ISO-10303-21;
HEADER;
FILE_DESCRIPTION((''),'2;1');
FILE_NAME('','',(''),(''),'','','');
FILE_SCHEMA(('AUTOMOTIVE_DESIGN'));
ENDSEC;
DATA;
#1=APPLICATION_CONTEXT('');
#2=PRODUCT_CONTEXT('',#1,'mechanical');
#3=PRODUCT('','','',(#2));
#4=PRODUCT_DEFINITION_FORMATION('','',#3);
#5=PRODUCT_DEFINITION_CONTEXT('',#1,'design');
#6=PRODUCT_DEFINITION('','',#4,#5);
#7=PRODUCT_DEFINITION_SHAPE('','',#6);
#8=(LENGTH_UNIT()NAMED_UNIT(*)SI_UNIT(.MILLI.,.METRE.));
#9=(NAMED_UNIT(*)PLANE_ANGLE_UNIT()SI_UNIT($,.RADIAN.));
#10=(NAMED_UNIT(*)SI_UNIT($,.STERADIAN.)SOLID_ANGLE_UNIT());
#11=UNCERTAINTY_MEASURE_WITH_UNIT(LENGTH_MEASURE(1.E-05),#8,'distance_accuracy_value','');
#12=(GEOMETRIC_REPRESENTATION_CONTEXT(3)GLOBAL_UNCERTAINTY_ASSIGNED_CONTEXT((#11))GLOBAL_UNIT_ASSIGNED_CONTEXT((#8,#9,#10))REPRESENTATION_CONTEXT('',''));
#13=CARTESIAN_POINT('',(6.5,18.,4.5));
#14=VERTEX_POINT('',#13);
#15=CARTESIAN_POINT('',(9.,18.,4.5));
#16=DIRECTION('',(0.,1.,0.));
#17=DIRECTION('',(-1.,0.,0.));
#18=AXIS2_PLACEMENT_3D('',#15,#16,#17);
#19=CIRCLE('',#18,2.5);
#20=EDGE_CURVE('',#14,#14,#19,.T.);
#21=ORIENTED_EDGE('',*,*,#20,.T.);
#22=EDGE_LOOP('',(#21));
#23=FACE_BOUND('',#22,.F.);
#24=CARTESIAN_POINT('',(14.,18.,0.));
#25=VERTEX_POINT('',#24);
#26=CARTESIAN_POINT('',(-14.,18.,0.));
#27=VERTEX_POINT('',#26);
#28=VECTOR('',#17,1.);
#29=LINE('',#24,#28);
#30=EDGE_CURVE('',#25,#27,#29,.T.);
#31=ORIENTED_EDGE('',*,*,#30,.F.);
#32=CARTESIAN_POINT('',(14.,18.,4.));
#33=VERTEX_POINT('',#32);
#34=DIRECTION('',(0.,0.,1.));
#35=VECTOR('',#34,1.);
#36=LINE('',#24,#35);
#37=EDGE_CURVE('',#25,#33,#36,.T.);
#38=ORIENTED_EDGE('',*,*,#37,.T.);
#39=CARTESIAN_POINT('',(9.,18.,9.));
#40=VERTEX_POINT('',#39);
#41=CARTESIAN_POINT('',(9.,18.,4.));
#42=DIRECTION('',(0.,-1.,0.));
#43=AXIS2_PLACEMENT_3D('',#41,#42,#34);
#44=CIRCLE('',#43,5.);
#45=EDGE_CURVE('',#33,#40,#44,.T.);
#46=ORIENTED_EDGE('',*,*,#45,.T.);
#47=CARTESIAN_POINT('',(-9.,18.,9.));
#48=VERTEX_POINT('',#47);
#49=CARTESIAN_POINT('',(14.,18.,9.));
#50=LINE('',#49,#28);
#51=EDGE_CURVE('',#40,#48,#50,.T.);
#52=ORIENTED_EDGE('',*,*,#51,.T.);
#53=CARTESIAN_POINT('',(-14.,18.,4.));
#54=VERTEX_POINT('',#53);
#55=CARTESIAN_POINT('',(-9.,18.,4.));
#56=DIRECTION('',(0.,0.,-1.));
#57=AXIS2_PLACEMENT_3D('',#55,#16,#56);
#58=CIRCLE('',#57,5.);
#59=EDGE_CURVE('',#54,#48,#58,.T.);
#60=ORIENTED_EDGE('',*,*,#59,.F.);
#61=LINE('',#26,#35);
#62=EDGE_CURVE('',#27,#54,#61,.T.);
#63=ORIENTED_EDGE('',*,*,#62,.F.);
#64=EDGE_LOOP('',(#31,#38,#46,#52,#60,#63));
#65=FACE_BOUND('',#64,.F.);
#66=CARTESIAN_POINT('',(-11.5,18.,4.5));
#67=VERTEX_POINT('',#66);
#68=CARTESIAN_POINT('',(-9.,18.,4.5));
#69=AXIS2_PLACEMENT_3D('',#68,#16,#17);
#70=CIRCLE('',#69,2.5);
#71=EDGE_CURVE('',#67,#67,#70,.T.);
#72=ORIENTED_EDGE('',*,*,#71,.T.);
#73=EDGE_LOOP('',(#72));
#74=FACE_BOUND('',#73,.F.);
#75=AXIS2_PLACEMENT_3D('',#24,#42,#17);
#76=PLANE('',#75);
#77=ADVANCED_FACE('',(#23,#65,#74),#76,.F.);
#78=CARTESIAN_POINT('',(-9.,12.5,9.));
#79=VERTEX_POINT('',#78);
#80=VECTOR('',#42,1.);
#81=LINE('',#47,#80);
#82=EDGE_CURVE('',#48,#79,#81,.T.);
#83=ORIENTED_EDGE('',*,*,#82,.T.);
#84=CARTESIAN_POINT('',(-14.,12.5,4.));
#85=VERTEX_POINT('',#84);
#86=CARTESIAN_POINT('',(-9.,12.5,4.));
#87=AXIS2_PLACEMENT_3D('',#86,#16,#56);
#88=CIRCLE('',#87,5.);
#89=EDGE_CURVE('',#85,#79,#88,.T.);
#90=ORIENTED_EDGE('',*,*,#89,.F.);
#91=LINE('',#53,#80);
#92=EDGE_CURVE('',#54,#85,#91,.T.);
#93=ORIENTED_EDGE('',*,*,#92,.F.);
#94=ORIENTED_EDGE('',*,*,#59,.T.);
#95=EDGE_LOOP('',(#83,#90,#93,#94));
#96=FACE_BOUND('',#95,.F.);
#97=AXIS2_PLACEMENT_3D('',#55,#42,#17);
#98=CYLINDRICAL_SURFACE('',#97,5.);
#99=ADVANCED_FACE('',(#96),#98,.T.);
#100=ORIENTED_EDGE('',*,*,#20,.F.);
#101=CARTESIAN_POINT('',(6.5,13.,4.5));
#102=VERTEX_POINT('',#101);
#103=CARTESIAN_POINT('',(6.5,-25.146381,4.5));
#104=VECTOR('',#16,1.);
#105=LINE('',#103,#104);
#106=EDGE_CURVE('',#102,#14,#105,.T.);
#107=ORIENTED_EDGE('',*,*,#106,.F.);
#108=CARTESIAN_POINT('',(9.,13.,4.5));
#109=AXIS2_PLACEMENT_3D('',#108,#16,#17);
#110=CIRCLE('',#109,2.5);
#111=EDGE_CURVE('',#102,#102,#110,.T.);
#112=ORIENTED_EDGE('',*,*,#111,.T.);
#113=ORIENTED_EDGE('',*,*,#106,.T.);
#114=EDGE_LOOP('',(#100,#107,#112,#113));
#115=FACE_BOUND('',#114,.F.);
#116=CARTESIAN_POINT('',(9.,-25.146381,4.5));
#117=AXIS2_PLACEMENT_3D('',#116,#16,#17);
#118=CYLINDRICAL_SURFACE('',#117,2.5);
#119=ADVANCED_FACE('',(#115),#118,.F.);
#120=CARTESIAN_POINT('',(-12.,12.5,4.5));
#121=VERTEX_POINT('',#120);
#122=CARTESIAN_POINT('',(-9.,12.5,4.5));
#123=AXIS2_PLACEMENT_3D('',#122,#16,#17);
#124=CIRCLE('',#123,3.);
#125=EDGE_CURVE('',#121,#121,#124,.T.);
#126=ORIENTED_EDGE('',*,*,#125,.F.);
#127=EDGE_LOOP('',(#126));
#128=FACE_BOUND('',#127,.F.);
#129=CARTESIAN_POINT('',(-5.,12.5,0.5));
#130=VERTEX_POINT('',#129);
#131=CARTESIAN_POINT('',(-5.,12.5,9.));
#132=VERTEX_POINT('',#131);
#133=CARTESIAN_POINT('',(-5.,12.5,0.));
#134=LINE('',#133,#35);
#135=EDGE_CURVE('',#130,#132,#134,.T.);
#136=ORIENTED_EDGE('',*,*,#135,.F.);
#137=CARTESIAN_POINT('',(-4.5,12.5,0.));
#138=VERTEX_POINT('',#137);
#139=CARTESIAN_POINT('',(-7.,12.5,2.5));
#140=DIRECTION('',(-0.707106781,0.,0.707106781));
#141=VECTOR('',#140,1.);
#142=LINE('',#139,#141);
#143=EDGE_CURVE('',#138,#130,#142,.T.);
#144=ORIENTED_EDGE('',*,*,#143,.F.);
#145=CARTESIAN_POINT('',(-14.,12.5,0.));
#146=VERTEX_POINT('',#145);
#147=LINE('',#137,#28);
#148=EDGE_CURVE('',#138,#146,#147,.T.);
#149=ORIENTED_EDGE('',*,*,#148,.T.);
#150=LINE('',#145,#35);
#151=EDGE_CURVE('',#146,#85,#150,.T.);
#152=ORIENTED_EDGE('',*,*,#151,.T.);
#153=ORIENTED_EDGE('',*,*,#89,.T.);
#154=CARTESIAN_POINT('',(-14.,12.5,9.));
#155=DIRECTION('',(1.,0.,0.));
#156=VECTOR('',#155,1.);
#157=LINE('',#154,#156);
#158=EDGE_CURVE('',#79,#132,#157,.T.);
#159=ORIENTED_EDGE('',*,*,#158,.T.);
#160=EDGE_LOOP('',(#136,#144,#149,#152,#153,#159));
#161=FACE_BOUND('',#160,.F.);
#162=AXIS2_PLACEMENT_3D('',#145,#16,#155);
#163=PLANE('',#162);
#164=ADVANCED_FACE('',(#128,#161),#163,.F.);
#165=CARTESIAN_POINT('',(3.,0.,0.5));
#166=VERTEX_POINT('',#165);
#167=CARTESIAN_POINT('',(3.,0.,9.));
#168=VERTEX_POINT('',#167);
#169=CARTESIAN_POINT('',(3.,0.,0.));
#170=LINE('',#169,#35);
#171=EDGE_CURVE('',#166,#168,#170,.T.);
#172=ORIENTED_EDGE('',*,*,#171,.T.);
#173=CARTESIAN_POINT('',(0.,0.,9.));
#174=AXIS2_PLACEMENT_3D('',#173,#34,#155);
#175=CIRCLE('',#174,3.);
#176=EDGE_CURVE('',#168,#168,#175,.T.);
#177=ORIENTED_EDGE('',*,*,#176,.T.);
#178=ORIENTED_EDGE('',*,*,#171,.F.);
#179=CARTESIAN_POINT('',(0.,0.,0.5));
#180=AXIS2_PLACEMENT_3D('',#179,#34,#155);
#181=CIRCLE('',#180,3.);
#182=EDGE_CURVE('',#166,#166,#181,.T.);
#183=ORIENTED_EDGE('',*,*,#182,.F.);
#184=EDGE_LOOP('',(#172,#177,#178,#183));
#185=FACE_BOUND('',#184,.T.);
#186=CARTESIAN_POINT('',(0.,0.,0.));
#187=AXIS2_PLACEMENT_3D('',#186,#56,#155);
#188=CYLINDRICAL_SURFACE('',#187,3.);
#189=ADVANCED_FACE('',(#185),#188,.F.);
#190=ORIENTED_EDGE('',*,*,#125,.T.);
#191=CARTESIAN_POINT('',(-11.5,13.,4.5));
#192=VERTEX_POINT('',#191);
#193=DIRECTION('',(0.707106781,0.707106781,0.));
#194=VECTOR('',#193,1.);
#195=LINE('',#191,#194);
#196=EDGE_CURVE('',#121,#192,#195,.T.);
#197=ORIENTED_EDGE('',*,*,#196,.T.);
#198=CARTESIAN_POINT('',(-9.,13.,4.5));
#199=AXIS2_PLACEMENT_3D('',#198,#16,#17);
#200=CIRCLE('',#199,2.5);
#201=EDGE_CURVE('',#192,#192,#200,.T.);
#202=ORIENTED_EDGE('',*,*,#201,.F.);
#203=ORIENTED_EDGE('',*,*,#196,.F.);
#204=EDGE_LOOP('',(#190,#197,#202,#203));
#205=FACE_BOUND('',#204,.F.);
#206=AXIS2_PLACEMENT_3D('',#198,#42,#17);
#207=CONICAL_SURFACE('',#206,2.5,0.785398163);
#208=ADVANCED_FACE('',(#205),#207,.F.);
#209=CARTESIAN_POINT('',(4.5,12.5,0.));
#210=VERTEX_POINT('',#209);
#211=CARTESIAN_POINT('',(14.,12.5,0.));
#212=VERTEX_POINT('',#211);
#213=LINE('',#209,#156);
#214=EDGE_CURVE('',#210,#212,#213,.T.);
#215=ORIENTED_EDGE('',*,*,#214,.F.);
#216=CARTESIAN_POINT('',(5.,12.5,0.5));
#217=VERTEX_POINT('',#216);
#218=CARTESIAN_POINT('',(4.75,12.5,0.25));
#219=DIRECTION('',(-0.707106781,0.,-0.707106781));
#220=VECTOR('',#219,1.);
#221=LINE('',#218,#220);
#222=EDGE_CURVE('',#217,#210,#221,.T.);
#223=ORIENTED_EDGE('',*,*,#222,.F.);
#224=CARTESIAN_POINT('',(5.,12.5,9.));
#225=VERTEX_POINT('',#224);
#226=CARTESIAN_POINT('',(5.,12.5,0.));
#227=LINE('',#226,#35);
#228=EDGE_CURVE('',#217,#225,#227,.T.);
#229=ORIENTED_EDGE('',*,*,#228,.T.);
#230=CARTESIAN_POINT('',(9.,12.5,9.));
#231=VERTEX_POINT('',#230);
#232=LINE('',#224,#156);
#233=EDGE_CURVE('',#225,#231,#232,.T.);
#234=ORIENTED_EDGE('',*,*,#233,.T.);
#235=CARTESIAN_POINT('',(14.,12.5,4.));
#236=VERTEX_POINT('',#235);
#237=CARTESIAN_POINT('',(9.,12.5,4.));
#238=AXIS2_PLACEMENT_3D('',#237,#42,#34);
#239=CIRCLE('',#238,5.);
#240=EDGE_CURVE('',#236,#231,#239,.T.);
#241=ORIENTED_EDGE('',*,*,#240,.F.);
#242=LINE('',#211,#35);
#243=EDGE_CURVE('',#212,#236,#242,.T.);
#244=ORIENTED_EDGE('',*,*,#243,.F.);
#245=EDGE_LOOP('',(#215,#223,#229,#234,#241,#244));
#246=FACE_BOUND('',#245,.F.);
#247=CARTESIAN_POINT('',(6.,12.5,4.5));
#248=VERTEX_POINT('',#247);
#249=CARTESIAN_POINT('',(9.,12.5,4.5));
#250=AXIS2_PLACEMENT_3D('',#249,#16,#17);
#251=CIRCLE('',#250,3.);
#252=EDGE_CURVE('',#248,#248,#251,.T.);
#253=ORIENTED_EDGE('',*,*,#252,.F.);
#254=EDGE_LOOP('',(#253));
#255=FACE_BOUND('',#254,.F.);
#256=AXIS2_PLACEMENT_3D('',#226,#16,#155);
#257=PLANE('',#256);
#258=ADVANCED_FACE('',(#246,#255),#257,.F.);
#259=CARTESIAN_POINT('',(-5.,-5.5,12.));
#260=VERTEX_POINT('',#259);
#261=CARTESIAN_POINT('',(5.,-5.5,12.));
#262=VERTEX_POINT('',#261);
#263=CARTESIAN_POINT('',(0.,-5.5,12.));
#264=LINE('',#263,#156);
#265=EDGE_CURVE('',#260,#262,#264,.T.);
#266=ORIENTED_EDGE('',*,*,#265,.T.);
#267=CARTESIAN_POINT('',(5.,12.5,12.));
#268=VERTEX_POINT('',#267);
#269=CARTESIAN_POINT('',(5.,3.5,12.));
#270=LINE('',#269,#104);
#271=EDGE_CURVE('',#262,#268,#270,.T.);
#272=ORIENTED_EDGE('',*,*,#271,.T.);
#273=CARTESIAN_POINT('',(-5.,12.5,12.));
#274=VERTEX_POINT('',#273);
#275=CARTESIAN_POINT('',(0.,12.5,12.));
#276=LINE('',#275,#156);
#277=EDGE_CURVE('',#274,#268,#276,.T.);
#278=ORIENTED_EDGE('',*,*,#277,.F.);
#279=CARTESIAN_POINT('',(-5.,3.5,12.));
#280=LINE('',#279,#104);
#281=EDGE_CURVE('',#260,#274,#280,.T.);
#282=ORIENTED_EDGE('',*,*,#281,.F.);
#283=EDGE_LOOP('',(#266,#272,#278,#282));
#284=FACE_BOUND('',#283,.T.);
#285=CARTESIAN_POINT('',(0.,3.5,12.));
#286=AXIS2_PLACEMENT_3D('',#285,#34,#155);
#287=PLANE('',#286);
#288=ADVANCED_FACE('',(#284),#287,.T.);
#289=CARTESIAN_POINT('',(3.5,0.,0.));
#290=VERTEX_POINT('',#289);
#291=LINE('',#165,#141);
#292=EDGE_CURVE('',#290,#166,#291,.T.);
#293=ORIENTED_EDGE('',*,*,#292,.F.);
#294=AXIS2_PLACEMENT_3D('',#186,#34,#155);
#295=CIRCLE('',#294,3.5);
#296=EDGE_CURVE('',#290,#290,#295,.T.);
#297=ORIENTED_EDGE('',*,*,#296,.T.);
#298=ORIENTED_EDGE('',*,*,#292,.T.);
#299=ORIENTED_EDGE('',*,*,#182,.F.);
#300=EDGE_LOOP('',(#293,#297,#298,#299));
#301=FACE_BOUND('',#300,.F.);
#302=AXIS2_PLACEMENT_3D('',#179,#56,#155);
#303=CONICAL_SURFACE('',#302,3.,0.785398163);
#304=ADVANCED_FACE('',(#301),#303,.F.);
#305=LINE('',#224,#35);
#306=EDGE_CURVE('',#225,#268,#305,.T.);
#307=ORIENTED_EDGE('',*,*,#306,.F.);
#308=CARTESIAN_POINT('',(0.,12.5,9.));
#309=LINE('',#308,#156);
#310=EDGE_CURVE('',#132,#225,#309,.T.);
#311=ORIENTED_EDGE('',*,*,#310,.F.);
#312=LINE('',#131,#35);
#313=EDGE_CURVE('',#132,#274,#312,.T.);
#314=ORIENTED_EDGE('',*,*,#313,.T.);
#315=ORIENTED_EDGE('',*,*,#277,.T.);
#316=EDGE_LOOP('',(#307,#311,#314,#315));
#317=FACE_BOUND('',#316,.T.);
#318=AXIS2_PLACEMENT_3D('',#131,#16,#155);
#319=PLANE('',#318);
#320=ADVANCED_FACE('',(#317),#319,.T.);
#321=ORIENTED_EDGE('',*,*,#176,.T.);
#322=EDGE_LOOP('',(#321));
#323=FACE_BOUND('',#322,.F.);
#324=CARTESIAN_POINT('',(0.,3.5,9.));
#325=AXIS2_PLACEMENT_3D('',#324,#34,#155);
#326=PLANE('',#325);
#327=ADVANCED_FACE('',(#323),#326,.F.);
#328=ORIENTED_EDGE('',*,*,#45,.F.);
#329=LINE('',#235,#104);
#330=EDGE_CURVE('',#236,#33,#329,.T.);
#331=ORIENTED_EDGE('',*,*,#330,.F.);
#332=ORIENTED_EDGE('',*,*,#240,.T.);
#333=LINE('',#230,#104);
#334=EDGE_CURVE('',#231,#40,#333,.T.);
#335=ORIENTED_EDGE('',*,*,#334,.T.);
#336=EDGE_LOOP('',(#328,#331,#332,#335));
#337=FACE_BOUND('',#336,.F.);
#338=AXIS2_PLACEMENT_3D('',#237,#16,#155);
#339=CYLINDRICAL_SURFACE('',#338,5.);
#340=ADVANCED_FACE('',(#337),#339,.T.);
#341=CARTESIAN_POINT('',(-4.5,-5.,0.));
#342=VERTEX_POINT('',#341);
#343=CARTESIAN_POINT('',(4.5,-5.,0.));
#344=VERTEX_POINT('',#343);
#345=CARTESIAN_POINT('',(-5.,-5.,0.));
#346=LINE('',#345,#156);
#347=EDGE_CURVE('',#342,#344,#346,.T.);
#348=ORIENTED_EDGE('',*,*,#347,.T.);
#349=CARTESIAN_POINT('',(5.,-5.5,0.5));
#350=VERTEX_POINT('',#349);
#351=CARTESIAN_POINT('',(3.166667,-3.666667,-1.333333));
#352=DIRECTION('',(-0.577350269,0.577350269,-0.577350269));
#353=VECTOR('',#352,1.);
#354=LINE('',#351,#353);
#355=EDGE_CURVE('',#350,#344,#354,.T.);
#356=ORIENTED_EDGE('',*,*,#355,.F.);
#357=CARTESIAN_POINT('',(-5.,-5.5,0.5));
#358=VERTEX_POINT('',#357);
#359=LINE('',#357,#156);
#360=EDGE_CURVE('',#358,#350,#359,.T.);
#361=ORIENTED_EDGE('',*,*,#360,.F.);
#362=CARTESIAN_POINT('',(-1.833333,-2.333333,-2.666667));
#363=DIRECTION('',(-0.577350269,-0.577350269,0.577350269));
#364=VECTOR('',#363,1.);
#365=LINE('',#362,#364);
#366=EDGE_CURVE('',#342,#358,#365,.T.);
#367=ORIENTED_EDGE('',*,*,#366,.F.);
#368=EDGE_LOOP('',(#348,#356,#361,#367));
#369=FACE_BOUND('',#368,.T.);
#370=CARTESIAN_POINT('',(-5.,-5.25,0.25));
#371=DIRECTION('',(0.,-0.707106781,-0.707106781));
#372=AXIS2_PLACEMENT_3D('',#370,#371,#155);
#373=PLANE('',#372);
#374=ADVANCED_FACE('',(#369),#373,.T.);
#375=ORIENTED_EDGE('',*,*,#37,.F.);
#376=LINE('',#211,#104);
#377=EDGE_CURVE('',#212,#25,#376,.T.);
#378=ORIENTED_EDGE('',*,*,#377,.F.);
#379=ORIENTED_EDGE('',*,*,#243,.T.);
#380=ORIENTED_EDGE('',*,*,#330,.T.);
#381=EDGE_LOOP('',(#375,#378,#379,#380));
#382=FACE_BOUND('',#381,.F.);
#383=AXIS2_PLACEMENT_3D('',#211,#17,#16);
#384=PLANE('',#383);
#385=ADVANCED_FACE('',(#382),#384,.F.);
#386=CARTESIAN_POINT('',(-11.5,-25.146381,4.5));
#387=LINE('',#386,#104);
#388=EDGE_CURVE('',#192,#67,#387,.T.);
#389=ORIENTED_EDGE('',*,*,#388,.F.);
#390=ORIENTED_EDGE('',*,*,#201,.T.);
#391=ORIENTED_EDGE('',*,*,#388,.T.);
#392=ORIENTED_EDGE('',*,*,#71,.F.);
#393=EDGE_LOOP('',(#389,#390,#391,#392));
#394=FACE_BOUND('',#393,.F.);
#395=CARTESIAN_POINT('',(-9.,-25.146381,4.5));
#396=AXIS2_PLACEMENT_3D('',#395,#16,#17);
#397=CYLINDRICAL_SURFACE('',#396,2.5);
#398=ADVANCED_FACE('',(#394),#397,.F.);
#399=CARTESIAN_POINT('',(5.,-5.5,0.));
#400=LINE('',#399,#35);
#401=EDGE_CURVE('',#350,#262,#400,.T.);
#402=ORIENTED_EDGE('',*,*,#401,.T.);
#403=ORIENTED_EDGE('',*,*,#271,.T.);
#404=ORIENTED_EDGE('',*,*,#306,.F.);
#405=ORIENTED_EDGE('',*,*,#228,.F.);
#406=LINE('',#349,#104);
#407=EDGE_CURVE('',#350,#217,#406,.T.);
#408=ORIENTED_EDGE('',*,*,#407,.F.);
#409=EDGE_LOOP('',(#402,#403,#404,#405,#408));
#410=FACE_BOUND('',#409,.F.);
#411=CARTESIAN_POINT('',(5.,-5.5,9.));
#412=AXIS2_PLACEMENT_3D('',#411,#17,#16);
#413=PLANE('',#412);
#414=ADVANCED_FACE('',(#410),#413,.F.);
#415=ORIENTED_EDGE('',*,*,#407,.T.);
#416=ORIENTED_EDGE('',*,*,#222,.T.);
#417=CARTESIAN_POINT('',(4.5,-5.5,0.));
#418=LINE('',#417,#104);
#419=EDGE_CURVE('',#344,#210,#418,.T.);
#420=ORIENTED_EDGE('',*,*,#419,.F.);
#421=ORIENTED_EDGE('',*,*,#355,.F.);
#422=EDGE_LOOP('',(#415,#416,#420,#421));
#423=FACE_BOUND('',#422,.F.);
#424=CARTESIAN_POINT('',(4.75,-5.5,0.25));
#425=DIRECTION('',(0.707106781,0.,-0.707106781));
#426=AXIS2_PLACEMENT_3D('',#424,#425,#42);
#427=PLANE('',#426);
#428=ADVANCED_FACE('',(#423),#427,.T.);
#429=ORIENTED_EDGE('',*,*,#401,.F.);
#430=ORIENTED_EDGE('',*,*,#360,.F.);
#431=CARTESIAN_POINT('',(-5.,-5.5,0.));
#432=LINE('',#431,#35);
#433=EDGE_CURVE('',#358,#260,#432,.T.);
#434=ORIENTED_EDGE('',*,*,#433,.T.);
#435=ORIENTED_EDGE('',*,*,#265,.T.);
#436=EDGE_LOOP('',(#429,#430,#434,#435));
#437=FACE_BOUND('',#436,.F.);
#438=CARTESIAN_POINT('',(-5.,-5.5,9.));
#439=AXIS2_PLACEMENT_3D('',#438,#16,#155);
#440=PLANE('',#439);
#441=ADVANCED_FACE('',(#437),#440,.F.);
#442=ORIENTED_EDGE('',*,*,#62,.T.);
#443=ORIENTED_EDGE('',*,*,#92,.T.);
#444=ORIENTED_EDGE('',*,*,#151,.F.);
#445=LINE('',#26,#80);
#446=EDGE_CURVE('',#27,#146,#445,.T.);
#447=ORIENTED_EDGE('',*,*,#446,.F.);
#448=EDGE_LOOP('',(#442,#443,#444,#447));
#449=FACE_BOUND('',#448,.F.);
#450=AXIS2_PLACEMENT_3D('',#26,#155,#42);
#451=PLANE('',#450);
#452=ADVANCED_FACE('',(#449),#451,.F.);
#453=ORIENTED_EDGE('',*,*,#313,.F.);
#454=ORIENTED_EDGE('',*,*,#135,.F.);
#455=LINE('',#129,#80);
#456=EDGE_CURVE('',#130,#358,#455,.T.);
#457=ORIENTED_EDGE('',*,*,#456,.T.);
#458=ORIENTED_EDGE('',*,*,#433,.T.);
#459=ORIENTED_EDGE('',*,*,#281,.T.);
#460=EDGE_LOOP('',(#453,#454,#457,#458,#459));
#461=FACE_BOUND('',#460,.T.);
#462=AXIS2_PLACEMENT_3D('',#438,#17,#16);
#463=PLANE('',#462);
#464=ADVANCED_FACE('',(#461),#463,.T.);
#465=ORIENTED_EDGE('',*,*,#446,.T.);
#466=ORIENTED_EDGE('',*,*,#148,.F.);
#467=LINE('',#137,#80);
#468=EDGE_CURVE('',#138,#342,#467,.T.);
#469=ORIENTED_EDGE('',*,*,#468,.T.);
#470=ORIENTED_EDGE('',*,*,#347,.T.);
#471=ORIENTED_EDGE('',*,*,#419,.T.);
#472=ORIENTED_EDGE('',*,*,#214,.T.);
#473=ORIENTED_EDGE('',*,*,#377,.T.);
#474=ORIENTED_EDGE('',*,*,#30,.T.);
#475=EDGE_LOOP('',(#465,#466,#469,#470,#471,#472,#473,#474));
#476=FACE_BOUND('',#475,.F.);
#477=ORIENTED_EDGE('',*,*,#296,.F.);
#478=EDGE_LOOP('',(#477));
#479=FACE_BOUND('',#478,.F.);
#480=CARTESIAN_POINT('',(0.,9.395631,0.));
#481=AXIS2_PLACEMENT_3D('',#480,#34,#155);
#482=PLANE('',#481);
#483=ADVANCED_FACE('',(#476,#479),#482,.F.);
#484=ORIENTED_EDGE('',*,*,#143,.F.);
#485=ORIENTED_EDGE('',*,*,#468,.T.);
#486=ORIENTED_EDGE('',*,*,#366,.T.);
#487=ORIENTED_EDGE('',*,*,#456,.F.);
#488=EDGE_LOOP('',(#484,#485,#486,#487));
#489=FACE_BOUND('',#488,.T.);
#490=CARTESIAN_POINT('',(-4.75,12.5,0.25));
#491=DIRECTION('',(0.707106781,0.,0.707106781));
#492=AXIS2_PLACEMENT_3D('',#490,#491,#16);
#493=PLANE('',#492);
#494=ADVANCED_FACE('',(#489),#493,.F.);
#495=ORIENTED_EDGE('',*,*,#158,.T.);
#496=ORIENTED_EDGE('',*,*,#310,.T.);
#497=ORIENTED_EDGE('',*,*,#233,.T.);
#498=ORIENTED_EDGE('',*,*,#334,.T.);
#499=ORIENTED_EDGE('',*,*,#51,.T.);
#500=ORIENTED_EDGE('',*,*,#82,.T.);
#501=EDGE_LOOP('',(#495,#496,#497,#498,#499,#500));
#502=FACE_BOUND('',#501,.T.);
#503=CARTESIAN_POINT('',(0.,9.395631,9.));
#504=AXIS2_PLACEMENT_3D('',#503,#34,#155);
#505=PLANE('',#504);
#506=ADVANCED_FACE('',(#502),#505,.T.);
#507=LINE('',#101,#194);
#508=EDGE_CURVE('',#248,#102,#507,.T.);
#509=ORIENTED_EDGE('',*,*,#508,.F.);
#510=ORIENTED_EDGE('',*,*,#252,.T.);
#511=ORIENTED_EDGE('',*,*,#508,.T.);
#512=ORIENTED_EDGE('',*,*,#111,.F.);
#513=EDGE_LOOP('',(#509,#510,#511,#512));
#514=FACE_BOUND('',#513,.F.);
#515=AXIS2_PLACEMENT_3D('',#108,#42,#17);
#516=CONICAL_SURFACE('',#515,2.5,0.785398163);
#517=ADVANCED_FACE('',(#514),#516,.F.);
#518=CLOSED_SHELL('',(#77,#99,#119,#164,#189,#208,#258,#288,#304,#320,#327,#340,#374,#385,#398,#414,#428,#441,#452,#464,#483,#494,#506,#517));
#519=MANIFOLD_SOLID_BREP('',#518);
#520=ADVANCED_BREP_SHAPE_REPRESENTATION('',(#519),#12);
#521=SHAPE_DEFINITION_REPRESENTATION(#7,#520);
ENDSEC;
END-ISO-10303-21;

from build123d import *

# Parameters (mm, degrees)
F0_R     = 3
F1_DEPTH = 9
F3_D     = 5
F4_W     = 10
F4_H     = 18
F5_DEPTH = 3
F6_R     = 5
F7_SIZE  = 0.5


with BuildPart() as f1:
    # F0 (on Top) → F1 (new body)
    with BuildSketch(Plane.XY):
        Polygon((-5, -5.5), (5, -5.5), (5, 12.5), (14, 12.5), (14, 18), (-14, 18), (-14, 12.5), (-5, 12.5), align=None)
        Circle(F0_R, mode=Mode.SUBTRACT)
    extrude(amount=F1_DEPTH)

    # F3 (through all)
    with Locations(Plane.XZ.offset(-12.5)):
        with Locations((9, 4.5), (-9, 4.5)):
            Hole(F3_D / 2)

    # F4 (on face) → F5 (join)
    with BuildSketch(Plane.XY.offset(9)):
        with Locations((0, 3.5)):
            Rectangle(F4_W, F4_H)
    extrude(amount=F5_DEPTH)

    # F6
    f6_edges = [f1.edges().sort_by_distance(p)[0] for p in [
        (14, 15.25, 9),
        (-14, 15.25, 9),
    ]]
    fillet(f6_edges, radius=F6_R)

    # F7
    f7_edges = [f1.edges().sort_by_distance(p)[0] for p in [
        (-3, 0, 0),
        (5, 3.5, 0),
        (-5, 3.5, 0),
        (0, -5.5, 0),
        (-11.5, 12.5, 4.5),
        (6.5, 12.5, 4.5),
    ]]
    chamfer(f7_edges, length=F7_SIZE)


solid = f1.part
